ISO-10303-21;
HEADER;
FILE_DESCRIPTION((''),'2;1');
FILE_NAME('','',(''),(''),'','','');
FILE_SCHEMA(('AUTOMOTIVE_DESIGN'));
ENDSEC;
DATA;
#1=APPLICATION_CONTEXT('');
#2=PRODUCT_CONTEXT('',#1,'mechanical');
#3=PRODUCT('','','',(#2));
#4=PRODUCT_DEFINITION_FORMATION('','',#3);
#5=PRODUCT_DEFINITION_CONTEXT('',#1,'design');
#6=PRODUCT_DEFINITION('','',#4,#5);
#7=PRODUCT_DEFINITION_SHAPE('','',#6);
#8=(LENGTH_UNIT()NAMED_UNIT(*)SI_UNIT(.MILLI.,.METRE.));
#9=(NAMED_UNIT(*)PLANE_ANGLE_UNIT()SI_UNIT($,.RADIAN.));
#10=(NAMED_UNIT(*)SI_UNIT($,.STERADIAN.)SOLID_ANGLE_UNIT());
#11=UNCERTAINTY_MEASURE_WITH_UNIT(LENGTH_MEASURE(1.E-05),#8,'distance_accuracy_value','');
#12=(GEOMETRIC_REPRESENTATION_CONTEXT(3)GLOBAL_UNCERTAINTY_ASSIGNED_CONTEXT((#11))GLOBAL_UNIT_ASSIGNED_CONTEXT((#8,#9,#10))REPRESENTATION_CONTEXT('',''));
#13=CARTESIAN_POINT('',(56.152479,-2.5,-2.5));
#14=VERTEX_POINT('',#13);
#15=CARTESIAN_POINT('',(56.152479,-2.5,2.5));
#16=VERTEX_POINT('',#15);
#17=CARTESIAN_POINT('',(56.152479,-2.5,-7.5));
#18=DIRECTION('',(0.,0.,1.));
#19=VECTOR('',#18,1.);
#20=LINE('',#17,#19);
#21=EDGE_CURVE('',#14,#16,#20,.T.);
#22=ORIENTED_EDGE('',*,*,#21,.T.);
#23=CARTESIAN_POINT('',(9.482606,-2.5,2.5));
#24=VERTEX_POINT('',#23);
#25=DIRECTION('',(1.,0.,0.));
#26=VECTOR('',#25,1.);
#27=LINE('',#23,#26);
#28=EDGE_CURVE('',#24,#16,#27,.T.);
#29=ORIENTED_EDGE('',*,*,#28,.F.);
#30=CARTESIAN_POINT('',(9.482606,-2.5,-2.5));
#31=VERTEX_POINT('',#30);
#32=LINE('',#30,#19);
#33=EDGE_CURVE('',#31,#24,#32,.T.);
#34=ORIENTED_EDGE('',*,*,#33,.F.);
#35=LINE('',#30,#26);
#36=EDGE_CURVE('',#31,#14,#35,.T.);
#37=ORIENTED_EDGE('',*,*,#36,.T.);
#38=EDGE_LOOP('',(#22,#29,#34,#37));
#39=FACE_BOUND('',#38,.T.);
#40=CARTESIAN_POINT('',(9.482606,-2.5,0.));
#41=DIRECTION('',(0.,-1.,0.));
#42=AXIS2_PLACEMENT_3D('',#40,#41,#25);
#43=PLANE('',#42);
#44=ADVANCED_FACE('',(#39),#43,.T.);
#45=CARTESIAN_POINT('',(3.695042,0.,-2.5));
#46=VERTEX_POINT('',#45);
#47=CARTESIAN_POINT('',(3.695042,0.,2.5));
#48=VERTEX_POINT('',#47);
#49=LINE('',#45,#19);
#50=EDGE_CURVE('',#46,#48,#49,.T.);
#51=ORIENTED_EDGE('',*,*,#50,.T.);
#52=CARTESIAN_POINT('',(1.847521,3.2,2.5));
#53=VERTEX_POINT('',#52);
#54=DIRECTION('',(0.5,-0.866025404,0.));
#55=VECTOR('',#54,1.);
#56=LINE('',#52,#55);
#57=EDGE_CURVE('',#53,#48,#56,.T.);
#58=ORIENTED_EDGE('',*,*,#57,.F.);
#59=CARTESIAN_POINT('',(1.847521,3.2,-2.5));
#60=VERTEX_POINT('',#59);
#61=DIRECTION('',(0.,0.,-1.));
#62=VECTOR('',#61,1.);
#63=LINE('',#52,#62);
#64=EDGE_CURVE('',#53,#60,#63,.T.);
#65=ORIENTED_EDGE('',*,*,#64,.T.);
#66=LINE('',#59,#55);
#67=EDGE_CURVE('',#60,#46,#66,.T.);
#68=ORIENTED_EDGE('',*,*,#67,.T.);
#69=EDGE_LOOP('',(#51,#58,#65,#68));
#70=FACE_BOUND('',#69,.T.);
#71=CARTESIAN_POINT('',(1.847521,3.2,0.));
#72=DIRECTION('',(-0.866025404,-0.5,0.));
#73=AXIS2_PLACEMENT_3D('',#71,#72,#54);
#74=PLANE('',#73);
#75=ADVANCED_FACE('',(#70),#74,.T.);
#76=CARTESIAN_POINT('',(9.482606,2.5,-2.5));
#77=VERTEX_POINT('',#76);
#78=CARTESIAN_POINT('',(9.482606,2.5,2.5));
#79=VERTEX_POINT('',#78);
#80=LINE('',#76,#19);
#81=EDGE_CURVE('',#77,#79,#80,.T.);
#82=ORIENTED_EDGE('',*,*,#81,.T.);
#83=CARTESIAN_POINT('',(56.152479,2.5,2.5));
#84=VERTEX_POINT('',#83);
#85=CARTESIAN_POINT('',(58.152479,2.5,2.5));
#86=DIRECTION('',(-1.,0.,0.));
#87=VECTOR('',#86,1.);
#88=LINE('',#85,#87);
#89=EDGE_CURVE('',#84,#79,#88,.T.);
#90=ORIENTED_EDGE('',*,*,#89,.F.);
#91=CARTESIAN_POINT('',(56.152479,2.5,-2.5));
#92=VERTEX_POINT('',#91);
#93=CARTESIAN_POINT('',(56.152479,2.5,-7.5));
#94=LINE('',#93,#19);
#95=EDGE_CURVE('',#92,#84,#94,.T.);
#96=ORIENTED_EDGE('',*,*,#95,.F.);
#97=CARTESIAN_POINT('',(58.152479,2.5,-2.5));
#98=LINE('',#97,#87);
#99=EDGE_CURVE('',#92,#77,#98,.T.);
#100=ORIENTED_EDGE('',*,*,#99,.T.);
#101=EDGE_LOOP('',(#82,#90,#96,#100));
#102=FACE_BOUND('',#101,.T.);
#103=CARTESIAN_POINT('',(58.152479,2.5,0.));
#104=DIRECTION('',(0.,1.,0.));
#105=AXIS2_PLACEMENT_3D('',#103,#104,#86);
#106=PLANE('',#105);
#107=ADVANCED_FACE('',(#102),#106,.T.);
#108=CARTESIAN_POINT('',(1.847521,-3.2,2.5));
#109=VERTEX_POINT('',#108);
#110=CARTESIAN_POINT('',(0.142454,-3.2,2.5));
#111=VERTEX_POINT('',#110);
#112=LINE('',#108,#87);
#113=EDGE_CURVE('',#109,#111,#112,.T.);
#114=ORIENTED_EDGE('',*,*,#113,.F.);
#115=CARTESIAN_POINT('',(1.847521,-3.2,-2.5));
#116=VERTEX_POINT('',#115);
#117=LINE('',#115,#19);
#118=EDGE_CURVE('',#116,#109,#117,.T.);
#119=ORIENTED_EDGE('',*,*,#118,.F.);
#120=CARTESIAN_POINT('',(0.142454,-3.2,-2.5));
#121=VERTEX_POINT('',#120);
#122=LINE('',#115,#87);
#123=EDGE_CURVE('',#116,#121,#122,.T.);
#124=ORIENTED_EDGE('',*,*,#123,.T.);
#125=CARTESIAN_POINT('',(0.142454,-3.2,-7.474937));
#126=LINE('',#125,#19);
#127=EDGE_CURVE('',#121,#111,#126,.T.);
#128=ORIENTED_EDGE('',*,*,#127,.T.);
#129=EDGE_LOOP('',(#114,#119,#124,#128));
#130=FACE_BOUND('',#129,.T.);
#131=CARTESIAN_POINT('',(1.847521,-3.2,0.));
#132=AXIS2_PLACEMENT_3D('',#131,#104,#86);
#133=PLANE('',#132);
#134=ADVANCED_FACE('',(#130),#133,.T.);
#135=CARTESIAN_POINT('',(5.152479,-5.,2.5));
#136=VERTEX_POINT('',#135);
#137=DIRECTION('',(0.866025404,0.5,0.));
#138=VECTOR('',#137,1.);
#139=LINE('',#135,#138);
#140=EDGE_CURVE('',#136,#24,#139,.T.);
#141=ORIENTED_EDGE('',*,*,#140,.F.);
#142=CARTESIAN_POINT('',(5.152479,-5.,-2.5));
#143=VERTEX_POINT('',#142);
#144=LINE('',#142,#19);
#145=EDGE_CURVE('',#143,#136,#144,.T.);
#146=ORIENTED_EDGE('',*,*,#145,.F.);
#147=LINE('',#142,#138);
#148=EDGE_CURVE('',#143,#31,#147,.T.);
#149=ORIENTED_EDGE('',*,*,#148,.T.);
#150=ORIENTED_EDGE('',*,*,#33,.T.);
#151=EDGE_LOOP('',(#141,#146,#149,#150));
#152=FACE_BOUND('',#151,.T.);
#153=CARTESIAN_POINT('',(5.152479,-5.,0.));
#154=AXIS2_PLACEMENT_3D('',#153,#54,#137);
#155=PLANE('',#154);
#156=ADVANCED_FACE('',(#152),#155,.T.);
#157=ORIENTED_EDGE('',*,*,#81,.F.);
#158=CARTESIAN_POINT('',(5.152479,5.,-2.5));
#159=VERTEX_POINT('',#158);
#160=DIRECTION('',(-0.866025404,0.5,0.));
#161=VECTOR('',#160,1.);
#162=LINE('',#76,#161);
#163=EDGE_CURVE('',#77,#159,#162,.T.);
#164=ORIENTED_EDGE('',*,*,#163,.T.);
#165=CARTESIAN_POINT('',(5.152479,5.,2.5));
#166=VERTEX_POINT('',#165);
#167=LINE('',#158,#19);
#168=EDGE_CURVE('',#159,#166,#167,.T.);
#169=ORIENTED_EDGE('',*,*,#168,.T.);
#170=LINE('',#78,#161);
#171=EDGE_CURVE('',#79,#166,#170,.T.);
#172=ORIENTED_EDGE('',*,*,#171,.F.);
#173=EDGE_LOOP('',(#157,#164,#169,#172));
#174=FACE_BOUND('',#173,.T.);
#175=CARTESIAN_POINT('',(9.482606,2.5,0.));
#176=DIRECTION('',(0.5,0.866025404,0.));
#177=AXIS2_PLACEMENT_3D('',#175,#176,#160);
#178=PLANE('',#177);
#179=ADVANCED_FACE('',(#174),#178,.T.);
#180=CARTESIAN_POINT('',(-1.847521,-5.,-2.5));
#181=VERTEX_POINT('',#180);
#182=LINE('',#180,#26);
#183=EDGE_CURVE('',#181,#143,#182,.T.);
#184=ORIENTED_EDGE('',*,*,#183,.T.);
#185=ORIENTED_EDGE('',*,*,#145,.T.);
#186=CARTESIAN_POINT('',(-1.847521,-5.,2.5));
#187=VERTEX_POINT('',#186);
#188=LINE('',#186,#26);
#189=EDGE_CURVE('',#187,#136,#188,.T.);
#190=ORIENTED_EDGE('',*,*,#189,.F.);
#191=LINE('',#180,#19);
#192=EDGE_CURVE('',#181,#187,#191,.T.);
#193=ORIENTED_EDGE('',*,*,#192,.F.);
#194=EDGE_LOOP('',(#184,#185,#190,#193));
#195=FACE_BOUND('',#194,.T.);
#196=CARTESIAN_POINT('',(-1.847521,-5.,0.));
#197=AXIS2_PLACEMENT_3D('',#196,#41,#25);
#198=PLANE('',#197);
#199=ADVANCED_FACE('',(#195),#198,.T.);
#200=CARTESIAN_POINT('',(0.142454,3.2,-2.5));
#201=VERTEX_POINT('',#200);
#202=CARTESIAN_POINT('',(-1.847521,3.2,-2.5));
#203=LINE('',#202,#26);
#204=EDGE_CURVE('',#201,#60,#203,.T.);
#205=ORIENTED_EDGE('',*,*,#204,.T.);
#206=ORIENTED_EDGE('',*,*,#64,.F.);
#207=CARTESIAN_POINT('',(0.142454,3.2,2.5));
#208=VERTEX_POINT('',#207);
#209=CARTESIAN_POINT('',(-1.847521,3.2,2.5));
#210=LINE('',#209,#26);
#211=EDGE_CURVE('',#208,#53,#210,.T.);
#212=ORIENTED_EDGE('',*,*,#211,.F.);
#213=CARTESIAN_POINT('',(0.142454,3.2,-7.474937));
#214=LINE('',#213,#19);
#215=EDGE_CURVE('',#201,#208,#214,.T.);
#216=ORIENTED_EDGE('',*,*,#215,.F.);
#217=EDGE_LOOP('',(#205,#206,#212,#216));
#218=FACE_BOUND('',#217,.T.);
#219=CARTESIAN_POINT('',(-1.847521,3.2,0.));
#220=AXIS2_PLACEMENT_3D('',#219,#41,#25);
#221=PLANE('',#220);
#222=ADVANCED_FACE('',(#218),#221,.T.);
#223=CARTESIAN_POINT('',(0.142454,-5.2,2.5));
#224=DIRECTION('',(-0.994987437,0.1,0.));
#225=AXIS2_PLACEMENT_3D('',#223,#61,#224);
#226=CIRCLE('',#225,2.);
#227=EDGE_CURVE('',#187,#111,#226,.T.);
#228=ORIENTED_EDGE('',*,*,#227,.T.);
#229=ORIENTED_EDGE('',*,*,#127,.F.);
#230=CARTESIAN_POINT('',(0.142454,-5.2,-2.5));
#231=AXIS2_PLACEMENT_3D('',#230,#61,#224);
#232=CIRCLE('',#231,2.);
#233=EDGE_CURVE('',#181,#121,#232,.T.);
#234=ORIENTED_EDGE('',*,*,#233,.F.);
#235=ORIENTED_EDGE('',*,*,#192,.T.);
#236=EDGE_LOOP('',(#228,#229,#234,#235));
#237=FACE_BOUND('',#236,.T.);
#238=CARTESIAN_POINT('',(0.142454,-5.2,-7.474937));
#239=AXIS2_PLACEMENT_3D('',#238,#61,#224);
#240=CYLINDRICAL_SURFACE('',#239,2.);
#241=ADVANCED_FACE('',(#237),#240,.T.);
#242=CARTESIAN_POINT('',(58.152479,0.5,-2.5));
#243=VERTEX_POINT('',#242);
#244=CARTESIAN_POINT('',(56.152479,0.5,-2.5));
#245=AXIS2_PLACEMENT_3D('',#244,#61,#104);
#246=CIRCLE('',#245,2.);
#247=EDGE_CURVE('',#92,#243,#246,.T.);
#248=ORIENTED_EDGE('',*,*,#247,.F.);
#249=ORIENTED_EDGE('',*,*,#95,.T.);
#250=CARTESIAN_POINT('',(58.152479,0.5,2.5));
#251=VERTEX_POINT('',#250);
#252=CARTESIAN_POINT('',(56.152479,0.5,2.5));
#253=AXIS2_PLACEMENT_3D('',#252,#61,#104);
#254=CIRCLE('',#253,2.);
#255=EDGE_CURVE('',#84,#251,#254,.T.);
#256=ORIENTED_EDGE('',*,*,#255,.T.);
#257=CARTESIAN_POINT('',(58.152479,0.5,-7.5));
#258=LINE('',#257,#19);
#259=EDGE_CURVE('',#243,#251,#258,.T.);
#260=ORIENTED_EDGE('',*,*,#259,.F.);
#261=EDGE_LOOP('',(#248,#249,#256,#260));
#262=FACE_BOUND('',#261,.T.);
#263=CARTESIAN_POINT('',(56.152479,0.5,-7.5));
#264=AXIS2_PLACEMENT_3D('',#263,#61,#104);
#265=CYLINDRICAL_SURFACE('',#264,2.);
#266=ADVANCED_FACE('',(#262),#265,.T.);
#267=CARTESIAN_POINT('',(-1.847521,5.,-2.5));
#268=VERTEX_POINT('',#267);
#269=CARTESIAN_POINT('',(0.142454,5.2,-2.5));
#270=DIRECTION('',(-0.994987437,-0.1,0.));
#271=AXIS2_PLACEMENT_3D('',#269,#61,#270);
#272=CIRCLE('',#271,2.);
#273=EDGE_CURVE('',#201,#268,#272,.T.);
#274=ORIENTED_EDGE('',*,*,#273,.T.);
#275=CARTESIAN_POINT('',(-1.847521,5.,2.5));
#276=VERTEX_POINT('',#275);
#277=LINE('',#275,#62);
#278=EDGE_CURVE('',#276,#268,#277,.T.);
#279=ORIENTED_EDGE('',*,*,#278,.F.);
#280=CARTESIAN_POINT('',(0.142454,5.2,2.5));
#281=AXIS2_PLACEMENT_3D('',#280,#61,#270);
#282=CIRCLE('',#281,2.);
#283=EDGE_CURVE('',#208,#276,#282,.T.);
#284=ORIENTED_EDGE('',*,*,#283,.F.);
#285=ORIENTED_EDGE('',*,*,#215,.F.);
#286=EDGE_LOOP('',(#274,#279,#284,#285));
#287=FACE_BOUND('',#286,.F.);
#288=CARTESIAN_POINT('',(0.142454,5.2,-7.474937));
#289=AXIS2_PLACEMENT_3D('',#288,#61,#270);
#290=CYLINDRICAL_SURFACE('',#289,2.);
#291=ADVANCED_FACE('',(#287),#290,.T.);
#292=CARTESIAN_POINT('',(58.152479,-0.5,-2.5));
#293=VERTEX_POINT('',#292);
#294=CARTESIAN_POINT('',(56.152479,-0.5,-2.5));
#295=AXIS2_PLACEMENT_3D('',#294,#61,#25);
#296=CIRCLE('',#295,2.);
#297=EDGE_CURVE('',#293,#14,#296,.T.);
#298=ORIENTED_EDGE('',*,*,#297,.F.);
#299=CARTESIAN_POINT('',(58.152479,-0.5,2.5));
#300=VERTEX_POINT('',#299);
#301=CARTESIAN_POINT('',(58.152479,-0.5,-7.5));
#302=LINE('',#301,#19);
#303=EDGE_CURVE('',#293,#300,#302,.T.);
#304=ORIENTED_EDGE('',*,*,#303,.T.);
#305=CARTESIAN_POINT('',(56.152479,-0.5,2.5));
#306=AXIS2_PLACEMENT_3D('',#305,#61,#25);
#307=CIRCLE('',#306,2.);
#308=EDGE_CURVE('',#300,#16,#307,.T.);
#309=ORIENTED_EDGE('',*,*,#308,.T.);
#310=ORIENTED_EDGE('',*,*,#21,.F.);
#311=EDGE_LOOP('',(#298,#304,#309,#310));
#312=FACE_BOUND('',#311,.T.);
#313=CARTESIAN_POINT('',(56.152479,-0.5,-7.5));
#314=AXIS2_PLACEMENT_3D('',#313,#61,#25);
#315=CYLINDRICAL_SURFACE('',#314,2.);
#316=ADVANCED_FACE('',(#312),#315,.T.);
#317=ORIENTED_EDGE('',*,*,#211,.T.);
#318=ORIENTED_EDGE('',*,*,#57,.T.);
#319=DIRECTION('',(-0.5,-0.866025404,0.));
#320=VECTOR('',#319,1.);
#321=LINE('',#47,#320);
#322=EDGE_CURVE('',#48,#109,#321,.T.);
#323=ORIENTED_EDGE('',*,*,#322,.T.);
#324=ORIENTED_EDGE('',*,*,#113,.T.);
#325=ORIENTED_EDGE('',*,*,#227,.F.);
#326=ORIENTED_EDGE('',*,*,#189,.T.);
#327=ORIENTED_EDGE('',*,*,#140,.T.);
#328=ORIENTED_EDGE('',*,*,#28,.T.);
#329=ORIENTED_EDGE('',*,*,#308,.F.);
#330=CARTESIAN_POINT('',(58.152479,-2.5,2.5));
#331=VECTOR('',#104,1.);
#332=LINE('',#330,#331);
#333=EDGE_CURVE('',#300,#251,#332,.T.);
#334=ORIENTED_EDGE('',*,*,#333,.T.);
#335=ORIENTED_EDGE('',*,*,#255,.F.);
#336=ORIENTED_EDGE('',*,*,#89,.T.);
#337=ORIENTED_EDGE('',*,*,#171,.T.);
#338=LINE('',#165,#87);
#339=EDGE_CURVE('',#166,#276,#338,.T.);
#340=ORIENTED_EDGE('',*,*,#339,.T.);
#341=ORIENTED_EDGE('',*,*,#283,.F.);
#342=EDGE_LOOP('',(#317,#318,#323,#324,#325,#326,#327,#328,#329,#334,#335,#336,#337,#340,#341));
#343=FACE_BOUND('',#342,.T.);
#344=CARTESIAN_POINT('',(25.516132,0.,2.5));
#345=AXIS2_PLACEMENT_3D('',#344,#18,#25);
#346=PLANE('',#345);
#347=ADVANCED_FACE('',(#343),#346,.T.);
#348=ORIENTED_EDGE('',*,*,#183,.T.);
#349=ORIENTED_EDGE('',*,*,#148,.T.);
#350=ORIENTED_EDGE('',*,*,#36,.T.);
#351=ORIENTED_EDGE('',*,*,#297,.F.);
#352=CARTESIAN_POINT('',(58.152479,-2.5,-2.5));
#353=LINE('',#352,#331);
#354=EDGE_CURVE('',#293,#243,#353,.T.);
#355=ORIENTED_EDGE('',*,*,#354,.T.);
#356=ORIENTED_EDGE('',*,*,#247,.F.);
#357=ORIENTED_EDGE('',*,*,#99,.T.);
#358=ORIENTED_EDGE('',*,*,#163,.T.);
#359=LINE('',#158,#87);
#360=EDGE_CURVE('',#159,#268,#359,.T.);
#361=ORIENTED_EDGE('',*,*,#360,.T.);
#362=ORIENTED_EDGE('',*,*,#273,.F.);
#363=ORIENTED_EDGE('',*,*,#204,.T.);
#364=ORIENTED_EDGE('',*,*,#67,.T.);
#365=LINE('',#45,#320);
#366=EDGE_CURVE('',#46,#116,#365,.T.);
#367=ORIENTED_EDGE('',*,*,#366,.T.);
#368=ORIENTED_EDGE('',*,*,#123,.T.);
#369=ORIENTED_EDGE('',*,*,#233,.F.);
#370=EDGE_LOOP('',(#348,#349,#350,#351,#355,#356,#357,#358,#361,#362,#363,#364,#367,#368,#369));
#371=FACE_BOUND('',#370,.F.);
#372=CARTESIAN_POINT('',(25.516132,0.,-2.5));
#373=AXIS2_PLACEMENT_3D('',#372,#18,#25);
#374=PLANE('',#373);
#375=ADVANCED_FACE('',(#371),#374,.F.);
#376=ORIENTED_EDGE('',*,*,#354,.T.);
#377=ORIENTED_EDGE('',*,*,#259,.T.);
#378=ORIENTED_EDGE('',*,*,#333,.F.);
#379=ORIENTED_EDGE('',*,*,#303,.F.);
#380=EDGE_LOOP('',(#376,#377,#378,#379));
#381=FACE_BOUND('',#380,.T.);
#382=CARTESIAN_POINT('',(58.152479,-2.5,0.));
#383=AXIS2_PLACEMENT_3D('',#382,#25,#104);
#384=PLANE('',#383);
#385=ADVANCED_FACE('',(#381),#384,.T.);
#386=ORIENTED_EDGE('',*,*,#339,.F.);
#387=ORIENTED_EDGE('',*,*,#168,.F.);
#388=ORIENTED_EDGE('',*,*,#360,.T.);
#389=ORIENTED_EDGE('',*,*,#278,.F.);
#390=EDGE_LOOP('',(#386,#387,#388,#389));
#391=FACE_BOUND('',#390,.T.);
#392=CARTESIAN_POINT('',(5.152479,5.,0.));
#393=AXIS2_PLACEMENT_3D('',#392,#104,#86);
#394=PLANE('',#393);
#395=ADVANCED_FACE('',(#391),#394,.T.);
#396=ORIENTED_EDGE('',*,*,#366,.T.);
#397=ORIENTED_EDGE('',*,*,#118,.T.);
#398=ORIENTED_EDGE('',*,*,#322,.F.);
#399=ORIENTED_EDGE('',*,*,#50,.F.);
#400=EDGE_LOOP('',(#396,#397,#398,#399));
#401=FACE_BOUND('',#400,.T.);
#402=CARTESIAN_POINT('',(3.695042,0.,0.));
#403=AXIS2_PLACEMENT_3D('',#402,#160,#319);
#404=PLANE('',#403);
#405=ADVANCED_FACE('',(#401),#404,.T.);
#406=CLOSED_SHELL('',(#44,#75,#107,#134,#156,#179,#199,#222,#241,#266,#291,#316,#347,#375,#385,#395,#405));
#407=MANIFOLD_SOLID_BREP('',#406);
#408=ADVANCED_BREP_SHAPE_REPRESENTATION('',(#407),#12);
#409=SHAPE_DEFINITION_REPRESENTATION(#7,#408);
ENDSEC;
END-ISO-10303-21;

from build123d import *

# Parameters (mm, degrees)
F1_DEPTH    = 2.5
F2_T1_DEPTH = 14.9498743711
F2_T3_DEPTH = 15


# Not quite as in the source:
# - a fillet or chamfer that OpenCascade refuses, or shapes differently, is made with other operations: its cross-section is extruded or revolved along the edge and cut away or added


with BuildPart() as f1:
    # F0 (on Top) → F1 (new body, symmetric)
    with BuildSketch(Plane.XY):
        Polygon((1.8475208614, 3.2), (3.6950417228, 0), (1.8475208614, -3.2), (-1.8475208614, -3.2), (-1.8475208614, -5), (5.1524791386, -5), (9.4826061575, -2.5), (58.1524791386, -2.5), (58.1524791386, 2.5), (9.4826061575, 2.5), (5.1524791386, 5), (-1.8475208614, 5), (-1.8475208614, 3.2), align=None)
    extrude(amount=F1_DEPTH, both=True)

    # F2: fillet of radius 2 on 4 edges, made by hand

    # F2_s2 → F2_t1 (cut)
    with BuildSketch(Plane.XY.offset(-7.4749371855)):
        with BuildLine():
            ThreePointArc((-1.8475208614, 5), (-1.1991867737, 3.7167603026), (0.1424540128, 3.2))
            Line((0.1424540128, 3.2), (-1.8475208614, 3.2))
            Line((-1.8475208614, 3.2), (-1.8475208614, 5))
        make_face()
        with BuildLine():
            ThreePointArc((-1.8475208614, -5), (-1.1991867737, -3.7167603026), (0.1424540128, -3.2))
            Line((0.1424540128, -3.2), (-1.8475208614, -3.2))
            Line((-1.8475208614, -3.2), (-1.8475208614, -5))
        make_face()
    extrude(amount=F2_T1_DEPTH, mode=Mode.SUBTRACT)

    # F2_s4 → F2_t3 (cut)
    with BuildSketch(Plane.XY.offset(-7.5)):
        with BuildLine():
            ThreePointArc((58.1524791386, -0.5), (57.566692701, -1.9142135624), (56.1524791386, -2.5))
            Line((56.1524791386, -2.5), (58.1524791386, -2.5))
            Line((58.1524791386, -2.5), (58.1524791386, -0.5))
        make_face()
        with BuildLine():
            ThreePointArc((56.1524791386, 2.5), (57.566692701, 1.9142135624), (58.1524791386, 0.5))
            Line((58.1524791386, 0.5), (58.1524791386, 2.5))
            Line((58.1524791386, 2.5), (56.1524791386, 2.5))
        make_face()
    extrude(amount=F2_T3_DEPTH, mode=Mode.SUBTRACT)


solid = f1.part
